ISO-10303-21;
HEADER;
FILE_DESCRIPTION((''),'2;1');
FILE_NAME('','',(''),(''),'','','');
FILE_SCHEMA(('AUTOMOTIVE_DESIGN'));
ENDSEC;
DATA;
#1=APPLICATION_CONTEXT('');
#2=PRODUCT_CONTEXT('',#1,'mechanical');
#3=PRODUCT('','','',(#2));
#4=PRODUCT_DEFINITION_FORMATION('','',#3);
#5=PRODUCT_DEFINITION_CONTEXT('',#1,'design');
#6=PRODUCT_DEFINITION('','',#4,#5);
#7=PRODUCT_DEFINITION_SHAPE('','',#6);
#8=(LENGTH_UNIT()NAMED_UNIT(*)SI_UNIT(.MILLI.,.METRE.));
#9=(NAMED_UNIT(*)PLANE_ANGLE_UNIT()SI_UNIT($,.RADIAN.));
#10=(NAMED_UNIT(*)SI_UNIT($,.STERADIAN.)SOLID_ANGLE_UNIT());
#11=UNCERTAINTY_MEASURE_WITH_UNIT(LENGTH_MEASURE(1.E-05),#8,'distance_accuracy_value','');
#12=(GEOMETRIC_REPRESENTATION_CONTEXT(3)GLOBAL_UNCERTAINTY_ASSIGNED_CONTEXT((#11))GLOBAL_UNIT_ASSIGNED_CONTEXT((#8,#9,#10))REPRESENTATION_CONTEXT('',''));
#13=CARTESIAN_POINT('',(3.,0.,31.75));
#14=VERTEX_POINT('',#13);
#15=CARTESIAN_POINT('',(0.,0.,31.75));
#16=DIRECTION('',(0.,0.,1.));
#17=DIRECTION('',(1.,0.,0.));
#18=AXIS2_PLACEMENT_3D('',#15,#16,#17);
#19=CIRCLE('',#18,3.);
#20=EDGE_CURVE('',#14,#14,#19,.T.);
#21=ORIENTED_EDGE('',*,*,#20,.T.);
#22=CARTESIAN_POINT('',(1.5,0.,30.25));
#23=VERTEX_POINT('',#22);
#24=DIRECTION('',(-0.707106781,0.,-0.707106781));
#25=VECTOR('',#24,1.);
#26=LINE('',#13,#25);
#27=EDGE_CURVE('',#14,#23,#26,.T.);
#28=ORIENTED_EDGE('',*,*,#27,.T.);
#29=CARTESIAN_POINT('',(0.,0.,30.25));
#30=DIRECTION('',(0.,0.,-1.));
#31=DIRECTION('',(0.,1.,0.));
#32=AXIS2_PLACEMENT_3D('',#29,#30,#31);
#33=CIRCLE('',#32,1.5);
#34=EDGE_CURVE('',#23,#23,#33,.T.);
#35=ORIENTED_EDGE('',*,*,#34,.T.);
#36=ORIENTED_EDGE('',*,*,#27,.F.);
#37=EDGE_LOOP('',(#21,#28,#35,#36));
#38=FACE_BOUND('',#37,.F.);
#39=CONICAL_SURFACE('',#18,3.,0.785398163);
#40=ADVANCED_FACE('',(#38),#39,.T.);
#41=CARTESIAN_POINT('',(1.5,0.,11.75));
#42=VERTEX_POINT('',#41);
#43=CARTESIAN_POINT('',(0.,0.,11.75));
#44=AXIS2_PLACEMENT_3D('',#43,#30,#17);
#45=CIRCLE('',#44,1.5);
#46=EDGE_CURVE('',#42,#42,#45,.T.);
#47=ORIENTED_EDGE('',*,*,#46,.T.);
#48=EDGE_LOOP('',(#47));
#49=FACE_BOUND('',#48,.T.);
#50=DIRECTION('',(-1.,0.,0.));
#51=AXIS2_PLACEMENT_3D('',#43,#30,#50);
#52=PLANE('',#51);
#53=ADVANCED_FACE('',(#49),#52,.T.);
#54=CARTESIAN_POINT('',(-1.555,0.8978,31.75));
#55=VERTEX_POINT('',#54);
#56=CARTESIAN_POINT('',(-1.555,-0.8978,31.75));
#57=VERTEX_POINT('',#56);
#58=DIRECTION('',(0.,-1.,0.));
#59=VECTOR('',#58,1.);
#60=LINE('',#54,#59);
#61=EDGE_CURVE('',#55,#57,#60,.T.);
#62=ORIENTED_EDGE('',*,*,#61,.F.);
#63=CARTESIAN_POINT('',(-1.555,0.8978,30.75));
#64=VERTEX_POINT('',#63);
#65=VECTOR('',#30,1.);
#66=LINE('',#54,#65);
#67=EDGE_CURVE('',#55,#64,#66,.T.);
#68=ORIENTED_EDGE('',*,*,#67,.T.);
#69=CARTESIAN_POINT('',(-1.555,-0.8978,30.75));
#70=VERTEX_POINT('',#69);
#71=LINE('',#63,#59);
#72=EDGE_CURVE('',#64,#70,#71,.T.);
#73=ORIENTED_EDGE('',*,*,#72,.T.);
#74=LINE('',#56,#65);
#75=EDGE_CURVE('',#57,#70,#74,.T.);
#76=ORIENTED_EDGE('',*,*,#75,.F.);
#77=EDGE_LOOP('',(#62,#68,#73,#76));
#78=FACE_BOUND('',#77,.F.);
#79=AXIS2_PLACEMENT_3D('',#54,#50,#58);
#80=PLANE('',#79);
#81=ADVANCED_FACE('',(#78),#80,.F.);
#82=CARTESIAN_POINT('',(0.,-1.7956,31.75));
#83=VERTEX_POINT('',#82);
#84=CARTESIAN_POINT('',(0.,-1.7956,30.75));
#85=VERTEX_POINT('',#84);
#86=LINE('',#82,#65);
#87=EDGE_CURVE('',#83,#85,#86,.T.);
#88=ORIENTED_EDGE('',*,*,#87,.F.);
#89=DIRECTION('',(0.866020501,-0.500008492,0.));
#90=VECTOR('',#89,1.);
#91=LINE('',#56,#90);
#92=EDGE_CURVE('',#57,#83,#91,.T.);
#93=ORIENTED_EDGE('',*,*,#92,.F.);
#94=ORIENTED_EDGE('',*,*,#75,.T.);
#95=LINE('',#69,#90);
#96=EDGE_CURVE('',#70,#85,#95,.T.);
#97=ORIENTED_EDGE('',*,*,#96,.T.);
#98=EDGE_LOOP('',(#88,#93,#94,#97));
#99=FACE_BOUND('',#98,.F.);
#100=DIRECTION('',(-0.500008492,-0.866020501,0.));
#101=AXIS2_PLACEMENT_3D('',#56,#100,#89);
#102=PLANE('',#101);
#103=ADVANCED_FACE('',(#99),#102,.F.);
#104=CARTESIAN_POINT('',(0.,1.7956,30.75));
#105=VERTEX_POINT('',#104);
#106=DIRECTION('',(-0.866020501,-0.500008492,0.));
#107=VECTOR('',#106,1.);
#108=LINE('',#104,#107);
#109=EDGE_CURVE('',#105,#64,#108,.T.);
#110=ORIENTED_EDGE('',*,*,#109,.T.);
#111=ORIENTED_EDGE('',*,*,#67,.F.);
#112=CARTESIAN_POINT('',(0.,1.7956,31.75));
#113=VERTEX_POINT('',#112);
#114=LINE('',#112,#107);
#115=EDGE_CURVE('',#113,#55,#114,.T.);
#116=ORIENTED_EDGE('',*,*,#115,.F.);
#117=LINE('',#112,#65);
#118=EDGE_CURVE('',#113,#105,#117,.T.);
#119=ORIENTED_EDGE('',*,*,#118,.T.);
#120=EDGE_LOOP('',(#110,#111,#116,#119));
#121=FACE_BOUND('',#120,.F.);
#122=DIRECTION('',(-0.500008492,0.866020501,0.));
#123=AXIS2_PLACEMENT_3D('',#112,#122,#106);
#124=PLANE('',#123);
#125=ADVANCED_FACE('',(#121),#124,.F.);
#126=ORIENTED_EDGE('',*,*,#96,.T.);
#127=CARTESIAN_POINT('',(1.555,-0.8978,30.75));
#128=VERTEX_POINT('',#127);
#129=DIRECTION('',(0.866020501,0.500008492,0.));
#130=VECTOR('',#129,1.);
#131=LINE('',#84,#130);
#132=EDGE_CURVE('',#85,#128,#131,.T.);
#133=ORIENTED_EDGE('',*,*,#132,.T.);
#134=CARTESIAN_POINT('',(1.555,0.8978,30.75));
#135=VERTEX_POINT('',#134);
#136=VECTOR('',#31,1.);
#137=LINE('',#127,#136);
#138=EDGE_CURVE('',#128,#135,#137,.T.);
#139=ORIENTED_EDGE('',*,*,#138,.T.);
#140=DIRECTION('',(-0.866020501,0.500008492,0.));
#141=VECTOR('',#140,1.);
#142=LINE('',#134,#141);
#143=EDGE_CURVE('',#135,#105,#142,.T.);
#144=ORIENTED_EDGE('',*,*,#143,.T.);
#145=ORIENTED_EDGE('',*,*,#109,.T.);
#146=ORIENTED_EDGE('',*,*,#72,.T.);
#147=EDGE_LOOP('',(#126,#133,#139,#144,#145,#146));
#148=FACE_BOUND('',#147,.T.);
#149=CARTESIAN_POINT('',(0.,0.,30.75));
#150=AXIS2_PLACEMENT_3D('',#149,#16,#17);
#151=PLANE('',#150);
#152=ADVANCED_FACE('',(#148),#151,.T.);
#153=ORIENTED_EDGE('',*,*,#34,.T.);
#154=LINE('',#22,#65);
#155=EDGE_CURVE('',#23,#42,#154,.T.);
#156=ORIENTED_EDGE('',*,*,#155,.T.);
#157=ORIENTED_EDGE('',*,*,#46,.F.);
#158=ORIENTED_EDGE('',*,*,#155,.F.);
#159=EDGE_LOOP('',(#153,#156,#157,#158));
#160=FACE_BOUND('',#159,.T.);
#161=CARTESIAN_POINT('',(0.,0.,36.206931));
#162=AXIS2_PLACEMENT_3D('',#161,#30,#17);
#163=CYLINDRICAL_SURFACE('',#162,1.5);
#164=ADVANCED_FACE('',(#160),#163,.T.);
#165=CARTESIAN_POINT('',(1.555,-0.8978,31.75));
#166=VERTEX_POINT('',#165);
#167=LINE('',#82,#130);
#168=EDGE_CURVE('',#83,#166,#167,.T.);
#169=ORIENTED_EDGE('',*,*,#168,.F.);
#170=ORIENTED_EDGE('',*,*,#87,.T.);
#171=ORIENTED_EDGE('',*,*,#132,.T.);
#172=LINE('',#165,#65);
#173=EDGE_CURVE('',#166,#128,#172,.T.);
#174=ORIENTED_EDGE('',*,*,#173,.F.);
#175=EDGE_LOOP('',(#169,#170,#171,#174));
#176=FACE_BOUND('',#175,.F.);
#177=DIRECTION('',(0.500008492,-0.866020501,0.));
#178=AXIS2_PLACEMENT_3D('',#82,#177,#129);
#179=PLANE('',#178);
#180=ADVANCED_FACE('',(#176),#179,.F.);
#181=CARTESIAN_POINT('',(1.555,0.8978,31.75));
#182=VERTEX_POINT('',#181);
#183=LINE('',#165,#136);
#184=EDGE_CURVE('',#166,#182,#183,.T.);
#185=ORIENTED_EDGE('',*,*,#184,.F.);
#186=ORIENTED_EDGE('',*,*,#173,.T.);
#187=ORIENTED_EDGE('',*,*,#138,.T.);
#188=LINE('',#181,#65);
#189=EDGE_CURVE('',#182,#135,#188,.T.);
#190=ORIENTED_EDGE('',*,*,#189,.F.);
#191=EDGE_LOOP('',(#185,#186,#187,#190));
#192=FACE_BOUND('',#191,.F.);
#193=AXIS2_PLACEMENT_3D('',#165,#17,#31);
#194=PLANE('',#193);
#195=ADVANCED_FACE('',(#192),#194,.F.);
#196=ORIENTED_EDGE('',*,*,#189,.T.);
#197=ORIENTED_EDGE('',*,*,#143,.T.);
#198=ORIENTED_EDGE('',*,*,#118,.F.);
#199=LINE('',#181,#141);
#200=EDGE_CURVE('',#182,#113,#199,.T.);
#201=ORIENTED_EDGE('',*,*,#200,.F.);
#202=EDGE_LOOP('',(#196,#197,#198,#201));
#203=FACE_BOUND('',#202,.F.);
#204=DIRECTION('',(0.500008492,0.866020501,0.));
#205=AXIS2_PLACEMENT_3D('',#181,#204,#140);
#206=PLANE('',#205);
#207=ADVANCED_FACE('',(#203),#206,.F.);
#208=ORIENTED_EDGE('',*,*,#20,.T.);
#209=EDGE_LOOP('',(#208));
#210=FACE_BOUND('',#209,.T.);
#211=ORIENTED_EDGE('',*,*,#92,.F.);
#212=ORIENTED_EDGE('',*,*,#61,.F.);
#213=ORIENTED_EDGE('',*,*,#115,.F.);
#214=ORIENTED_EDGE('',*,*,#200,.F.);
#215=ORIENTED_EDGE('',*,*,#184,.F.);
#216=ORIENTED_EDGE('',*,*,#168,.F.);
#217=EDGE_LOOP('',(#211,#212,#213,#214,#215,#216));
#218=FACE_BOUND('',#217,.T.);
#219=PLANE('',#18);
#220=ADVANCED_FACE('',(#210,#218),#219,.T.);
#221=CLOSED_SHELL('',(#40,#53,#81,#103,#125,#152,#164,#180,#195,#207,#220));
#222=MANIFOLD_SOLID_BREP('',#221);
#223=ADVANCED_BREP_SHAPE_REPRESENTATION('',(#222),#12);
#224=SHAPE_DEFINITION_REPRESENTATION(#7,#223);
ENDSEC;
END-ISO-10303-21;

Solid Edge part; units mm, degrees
sketch "Sketch1" plane through (0, 0, 0) normal (0, 0, 1) x (1, 0, 0)
  circle A0 centre (0, 0) radius 1.5
extrude "Protrusion1" add sketch "Sketch1" along normal blind 30
sketch "Sketch2" plane through (0, 0, 30) normal (0, 0, 1) x (1, 0, 0)
  circle A0 centre (0, 0) radius 3
extrude "ExtrudedProtrusion_2" add sketch "Sketch2" along normal blind 1.75
chamfer "Chamfer_1" distance 1.75 angle 45 1 edges at (-3, 0, 30)
sketch "Sketch3" plane through (0, 0, 31.75) normal (0, 0, 1) x (0, 1, 0)
  line L0 (0.8978, -1.555) -> (1.7956, 0)
  line L1 (1.7956, 0) -> (0.8978, 1.555)
  line L2 (0.8978, 1.555) -> (-0.8978, 1.555)
  line L3 (-0.8978, 1.555) -> (-1.7956, 0)
  line L4 (-1.7956, 0) -> (-0.8978, -1.555)
  line L5 (-0.8978, -1.555) -> (0.8978, -1.555)
extrude "ExtrudedCutout_1" cut sketch "Sketch3" against normal blind 1
sketch "Sketch4" plane through (0, 0, 0) normal (0, 0, -1) x (0, 1, 0)
  circle A0 centre (0, 0) radius 1.9215
extrude "ExtrudedCutout_2" cut sketch "Sketch4" against normal blind 11.75
properties material "Iron, grey cast type 20"
